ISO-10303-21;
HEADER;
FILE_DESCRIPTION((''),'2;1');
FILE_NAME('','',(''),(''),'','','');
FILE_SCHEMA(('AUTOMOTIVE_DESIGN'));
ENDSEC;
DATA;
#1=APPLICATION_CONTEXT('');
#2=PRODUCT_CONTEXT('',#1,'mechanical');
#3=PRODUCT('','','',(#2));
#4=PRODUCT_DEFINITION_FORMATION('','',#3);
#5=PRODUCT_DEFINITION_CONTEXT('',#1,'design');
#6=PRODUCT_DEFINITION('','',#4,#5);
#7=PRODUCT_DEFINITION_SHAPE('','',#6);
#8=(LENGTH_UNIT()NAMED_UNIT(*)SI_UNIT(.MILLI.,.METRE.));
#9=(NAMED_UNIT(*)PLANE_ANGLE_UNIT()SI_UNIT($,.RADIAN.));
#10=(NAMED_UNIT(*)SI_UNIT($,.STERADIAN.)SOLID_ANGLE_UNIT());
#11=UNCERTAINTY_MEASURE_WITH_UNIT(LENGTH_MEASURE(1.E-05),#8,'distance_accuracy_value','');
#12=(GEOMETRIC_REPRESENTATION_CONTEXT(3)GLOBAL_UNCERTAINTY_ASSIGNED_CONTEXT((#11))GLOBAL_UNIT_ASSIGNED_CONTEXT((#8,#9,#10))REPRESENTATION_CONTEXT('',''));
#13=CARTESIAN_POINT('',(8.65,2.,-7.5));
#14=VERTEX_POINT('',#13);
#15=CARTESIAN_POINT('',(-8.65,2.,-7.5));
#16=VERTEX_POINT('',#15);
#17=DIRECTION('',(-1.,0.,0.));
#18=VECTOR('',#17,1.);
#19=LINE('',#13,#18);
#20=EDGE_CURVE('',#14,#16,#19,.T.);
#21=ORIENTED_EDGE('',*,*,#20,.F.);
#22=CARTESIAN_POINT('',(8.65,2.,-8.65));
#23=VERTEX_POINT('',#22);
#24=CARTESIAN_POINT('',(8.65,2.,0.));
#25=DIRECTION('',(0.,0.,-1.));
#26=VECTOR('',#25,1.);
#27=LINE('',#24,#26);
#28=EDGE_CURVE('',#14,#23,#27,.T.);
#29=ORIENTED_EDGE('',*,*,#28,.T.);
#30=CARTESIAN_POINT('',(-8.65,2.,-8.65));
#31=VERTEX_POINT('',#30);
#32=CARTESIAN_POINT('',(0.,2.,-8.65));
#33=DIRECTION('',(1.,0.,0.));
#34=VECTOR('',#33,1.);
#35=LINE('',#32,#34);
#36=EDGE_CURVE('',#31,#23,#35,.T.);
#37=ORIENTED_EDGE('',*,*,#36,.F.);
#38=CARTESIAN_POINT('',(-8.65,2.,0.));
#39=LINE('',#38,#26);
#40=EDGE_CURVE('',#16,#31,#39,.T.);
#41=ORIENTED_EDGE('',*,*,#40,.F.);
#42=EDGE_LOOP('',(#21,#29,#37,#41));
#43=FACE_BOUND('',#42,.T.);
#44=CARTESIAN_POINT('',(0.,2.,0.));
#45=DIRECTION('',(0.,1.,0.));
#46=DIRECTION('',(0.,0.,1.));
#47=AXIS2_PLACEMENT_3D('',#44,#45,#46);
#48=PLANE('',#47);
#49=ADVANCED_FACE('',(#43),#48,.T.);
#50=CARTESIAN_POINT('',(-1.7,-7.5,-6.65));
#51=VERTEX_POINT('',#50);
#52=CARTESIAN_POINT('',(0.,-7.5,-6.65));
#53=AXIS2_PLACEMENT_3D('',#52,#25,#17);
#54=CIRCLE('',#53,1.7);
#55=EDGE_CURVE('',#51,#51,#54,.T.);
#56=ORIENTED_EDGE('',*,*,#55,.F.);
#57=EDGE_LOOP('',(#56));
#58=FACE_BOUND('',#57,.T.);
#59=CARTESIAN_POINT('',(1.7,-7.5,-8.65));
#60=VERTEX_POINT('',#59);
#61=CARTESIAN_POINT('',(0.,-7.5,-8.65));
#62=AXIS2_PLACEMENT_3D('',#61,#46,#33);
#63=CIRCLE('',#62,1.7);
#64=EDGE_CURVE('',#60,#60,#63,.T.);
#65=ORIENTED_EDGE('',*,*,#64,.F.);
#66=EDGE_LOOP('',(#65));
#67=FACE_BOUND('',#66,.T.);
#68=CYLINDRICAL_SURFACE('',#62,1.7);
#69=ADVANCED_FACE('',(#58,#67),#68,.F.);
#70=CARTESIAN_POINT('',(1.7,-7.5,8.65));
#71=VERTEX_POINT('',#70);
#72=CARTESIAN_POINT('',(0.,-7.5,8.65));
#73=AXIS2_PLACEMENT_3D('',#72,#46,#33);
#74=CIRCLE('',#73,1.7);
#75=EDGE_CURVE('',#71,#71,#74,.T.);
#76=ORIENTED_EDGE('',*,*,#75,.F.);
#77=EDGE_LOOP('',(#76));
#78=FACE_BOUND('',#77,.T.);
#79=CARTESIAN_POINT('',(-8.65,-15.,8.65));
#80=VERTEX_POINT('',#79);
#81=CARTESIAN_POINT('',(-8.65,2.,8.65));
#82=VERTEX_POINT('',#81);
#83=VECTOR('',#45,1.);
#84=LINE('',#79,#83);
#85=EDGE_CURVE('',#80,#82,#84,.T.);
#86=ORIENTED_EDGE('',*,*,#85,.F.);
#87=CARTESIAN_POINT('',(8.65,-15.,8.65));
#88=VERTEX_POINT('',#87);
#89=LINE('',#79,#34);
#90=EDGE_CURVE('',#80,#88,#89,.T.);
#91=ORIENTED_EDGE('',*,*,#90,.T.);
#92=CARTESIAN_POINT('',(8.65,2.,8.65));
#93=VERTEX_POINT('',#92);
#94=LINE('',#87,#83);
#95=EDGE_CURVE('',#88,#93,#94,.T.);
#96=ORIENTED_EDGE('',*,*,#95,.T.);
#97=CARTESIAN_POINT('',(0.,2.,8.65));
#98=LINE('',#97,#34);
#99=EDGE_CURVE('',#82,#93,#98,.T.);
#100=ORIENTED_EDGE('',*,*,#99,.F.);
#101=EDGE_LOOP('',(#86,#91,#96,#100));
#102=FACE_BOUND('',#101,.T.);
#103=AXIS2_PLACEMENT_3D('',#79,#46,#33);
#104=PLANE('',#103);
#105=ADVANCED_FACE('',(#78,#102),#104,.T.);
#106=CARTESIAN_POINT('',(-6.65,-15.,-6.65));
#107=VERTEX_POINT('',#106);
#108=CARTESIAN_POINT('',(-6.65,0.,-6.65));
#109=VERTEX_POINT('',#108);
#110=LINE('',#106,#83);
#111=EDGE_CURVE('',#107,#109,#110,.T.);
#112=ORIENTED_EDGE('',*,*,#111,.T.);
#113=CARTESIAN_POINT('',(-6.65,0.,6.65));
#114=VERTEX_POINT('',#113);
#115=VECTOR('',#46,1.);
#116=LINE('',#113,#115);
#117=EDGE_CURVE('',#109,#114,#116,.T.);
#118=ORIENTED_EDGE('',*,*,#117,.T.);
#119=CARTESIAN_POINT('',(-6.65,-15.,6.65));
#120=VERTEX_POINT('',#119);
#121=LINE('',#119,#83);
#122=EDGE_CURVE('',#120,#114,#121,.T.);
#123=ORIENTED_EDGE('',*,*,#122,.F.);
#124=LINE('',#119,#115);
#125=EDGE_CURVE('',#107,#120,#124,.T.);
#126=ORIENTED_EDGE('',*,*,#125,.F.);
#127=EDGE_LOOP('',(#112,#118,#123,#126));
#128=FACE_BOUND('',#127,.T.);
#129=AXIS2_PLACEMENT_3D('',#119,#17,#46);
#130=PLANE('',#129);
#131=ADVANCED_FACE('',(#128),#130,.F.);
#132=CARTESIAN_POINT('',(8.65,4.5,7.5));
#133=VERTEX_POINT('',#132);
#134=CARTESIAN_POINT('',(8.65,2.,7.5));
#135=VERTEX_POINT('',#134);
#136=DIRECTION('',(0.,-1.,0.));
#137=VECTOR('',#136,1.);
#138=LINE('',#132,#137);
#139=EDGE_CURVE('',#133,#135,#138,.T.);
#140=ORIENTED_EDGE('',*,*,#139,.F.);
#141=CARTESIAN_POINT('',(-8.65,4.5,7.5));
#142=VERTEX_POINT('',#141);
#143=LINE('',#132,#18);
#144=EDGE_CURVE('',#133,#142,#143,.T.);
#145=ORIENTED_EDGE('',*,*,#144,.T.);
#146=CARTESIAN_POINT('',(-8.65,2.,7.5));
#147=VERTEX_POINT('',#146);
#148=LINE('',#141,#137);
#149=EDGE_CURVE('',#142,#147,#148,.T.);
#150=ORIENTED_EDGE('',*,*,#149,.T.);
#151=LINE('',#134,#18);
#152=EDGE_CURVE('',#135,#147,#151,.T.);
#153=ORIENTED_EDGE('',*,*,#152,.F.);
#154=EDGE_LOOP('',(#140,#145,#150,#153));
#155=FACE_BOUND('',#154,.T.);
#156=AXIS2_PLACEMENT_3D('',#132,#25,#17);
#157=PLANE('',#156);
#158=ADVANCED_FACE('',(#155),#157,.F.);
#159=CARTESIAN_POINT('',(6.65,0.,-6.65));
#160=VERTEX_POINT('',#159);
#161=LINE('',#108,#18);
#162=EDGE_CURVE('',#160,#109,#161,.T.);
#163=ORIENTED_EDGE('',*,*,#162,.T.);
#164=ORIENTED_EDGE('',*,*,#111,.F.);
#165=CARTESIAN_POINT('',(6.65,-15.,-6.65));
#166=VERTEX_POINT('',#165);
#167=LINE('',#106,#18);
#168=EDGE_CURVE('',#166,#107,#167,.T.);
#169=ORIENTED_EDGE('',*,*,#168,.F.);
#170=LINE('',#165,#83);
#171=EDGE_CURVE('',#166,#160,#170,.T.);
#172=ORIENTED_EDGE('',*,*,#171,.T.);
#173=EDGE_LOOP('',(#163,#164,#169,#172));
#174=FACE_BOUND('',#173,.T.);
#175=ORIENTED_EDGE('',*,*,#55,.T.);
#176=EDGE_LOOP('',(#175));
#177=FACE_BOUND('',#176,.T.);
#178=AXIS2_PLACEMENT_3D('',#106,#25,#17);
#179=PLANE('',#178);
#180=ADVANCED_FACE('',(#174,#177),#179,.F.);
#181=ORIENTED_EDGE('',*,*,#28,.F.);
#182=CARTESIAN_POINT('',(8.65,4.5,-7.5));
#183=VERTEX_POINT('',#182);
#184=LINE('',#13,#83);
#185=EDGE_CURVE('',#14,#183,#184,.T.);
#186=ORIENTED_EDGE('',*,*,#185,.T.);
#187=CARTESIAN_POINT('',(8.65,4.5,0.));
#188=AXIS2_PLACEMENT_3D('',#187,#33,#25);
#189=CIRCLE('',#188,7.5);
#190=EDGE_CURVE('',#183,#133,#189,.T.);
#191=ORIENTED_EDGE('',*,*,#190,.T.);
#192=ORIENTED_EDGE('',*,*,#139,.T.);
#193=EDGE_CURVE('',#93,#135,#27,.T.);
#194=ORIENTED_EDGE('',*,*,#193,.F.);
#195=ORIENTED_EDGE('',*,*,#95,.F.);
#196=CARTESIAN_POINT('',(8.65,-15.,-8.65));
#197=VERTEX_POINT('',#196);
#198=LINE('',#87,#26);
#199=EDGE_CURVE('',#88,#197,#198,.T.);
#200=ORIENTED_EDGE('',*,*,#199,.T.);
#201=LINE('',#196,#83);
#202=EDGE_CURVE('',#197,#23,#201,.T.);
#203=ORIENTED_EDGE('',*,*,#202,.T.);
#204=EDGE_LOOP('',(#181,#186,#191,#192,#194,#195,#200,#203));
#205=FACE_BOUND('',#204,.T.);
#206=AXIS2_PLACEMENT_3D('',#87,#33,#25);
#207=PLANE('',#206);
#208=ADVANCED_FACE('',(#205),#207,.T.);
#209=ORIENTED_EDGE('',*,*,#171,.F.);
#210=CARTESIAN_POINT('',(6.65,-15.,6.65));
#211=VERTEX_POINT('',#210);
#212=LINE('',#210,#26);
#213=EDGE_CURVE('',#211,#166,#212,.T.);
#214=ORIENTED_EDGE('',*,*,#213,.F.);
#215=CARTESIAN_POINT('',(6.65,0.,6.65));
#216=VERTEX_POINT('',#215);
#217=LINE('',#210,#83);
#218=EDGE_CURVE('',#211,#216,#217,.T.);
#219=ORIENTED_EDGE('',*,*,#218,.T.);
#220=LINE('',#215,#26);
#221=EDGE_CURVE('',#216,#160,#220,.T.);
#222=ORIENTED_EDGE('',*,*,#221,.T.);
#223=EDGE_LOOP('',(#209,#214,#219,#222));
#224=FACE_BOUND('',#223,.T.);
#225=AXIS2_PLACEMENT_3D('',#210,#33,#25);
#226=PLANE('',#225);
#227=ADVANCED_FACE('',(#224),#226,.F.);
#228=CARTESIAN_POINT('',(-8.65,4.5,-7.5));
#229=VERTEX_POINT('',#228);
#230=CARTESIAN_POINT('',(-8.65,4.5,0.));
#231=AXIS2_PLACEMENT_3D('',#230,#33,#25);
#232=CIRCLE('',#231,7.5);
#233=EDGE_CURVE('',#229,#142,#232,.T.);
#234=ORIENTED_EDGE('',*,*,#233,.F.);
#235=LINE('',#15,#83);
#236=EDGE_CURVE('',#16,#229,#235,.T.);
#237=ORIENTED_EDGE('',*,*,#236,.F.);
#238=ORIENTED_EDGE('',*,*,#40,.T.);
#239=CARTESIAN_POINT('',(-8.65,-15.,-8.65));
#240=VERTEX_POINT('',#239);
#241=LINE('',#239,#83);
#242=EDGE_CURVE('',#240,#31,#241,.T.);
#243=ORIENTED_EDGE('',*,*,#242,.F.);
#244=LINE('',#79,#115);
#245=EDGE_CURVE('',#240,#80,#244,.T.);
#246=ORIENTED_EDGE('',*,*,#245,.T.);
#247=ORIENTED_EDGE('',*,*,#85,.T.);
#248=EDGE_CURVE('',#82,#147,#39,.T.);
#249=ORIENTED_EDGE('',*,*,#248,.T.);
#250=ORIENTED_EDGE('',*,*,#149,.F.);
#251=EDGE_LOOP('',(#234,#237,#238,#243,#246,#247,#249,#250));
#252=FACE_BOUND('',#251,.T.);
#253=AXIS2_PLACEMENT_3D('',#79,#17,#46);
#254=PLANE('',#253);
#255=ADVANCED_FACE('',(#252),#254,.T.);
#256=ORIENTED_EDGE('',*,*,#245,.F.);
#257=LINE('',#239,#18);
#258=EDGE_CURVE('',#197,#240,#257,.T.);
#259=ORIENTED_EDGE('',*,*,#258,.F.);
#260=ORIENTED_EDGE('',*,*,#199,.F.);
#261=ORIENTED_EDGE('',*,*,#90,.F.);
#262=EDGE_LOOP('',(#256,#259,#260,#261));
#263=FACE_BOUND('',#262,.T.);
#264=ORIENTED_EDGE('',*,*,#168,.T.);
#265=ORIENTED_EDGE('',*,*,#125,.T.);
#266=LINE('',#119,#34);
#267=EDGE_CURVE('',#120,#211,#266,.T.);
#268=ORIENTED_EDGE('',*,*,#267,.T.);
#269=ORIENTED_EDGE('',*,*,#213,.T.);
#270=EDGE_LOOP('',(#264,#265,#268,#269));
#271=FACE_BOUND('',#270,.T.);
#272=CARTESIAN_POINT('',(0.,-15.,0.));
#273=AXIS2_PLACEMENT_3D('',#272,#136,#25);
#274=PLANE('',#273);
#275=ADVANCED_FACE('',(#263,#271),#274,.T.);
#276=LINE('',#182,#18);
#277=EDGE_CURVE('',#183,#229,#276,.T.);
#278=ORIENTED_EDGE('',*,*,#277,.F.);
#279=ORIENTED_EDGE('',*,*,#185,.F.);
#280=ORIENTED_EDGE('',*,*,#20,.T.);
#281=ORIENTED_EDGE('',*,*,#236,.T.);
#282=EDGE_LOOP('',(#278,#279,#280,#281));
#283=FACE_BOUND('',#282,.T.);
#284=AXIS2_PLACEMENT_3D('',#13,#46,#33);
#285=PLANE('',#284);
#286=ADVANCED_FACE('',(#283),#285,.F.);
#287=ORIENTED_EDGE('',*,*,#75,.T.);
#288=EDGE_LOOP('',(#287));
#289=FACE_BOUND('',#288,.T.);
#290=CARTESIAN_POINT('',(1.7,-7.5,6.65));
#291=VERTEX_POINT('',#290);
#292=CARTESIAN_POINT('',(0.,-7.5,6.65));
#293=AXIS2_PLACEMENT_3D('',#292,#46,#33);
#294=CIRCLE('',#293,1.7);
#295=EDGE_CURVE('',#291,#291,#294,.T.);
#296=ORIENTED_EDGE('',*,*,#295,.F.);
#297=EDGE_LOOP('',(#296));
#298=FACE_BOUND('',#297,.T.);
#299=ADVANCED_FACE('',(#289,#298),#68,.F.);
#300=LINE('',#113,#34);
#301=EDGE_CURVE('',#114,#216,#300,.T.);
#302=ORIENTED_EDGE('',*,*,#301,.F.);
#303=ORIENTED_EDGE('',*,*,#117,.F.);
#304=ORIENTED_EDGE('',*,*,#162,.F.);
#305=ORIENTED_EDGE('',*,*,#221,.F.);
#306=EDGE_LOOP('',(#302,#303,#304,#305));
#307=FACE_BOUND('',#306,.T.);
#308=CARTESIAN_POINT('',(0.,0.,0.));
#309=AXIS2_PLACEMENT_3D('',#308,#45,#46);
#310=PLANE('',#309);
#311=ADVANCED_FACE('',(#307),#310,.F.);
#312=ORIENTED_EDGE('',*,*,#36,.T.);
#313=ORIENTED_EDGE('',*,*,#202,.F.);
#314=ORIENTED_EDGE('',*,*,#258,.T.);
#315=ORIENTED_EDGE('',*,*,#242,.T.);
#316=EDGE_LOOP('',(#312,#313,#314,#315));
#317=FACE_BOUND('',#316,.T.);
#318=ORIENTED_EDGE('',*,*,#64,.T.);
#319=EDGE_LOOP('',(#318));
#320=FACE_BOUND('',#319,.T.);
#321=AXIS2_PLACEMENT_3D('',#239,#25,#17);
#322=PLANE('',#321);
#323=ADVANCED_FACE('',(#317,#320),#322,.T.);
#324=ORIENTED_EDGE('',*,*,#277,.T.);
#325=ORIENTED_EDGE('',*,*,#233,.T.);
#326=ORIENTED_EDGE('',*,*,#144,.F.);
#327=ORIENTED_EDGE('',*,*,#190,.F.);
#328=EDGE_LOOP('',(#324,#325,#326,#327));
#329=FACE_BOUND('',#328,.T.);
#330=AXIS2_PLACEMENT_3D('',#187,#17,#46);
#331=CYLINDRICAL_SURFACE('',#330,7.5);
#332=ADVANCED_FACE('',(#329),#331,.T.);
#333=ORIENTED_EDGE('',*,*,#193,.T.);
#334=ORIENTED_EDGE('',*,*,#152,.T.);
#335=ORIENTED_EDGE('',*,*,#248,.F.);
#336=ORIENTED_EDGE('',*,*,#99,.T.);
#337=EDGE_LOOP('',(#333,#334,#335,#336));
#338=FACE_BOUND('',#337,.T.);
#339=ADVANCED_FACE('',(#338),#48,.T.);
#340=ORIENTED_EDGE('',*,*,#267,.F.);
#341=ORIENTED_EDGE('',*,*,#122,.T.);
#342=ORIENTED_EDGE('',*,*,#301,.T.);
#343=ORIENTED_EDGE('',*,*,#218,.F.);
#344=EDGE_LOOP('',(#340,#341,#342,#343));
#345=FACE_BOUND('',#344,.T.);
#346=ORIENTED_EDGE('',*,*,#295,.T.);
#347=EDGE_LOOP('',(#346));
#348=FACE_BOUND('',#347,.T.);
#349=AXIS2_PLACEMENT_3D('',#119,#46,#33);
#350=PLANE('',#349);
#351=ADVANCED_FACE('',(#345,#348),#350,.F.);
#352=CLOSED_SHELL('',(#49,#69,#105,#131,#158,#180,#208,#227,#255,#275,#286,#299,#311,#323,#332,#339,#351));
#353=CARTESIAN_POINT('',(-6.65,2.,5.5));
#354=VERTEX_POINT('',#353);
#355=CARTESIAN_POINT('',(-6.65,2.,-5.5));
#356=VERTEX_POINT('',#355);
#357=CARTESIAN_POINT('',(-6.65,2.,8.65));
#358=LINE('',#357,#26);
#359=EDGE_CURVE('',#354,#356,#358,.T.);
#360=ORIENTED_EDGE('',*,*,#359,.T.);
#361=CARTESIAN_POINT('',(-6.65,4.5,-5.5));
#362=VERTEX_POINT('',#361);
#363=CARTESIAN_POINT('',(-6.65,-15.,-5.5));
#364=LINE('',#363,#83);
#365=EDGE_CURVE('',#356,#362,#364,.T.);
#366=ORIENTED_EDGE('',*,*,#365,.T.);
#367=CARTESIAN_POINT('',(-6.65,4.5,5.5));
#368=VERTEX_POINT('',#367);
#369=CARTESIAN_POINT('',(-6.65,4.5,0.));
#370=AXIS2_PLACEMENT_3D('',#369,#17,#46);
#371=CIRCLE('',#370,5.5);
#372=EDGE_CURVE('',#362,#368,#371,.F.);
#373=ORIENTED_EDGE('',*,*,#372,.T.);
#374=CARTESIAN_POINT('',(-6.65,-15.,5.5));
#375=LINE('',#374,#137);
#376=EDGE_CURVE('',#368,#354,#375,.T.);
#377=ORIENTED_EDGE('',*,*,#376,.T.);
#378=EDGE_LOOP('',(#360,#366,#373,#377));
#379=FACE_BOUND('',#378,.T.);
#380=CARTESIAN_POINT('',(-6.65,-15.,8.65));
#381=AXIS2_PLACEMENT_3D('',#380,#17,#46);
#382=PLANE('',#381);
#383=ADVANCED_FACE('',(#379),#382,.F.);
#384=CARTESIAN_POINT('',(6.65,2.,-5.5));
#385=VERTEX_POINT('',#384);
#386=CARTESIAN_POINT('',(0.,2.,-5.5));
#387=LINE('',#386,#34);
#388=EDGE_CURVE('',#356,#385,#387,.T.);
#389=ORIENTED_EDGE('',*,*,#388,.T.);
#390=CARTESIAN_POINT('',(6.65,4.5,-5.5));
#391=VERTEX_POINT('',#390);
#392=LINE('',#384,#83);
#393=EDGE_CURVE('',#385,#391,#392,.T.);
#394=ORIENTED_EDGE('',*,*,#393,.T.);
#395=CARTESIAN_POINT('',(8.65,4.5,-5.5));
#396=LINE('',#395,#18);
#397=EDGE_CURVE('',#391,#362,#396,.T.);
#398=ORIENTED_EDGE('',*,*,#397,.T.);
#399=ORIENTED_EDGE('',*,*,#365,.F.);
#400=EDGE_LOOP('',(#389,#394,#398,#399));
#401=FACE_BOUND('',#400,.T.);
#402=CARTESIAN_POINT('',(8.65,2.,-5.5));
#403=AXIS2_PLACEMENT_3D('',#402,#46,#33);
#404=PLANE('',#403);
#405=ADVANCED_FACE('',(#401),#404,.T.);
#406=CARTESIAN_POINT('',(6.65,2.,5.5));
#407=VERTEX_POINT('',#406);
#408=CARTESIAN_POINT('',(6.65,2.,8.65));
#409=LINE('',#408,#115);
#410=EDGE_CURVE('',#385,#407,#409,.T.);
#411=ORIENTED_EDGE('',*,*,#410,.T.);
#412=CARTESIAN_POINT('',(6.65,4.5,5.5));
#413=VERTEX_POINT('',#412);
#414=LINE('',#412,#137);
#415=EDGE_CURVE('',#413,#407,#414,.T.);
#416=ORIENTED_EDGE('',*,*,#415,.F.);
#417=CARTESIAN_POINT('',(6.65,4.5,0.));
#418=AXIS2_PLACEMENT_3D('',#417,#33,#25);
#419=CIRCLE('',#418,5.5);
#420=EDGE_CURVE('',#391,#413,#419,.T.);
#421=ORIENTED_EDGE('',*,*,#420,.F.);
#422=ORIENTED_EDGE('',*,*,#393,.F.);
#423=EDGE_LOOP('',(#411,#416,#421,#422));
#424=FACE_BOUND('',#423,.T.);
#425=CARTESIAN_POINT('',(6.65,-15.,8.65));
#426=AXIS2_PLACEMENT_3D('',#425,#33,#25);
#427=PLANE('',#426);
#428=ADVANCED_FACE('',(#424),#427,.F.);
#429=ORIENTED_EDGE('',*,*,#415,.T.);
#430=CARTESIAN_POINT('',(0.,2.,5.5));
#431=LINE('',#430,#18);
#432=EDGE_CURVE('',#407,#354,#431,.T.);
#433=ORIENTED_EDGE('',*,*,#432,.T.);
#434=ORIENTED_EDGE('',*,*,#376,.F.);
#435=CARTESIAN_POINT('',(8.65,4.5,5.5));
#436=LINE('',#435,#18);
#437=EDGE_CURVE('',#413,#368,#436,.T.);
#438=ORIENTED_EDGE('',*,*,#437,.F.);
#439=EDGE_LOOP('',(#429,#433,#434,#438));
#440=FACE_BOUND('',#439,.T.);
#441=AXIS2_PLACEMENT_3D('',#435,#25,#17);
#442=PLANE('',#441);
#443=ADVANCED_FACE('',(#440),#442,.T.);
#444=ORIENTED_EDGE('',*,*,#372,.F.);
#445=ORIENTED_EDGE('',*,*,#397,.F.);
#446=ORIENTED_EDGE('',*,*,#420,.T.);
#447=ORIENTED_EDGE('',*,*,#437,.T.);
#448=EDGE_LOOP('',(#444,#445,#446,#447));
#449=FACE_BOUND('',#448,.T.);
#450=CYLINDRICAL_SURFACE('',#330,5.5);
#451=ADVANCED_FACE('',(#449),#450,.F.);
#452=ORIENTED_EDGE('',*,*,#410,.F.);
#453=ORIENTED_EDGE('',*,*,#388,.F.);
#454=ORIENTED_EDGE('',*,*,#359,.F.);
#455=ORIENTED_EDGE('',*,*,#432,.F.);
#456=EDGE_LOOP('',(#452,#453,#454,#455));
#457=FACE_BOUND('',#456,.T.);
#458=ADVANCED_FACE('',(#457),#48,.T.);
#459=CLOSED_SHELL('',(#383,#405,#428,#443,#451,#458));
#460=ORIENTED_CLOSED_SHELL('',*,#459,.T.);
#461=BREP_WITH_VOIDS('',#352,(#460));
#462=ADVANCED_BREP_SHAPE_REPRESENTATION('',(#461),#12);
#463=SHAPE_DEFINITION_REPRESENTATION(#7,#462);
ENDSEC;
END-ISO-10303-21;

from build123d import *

# Parameters (mm, degrees)
CROQUIS3_W                   = 17.3
CROQUIS3_H                   = 17.3
CROQUIS3_W_2                 = 13.3
CROQUIS3_H_2                 = 13.3
SALIENTE_EXTRUIR1_DEPTH      = 15
CROQUIS3_2_W                 = 17.3
CROQUIS3_2_H                 = 17.3
CROQUIS3_2_W_2               = 13.3
CROQUIS3_2_H_2               = 13.3
SALIENTE_EXTRUIR2_DEPTH      = 2
CORTAR_EXTRUIR1_DEPTH        = 20.3557485
CORTAR_EXTRUIR1_DEPTH_BACK   = 20.3557485
CROQUIS5_R                   = 1.7
SALIENTE_EXTRUIR4_DEPTH      = 8.65
SALIENTE_EXTRUIR4_DEPTH_BACK = 8.65
VACIADO1_START               = -6.65
VACIADO1_DEPTH               = 13.3


# Read off the part's stored shape, not the designer's step: Vaciado1
with BuildPart() as part:
    # Croquis3 → Saliente-Extruir1 (new body)
    with BuildSketch(Plane(origin=(0, 0, 0), x_dir=(1, 0, 0), z_dir=(0, 1, 0))):
        Rectangle(CROQUIS3_W, CROQUIS3_H)
        Rectangle(CROQUIS3_W_2, CROQUIS3_H_2, mode=Mode.SUBTRACT)
    extrude(amount=-SALIENTE_EXTRUIR1_DEPTH)

    # Croquis3<2> → Saliente-Extruir2 (add)
    # profile 1 of 2: a face of its own
    with BuildSketch(Plane(origin=(0, 0, 0), x_dir=(1, 0, 0), z_dir=(0, 1, 0))):
        Rectangle(CROQUIS3_2_W, CROQUIS3_2_H)
        Rectangle(CROQUIS3_2_W_2, CROQUIS3_2_H_2, mode=Mode.SUBTRACT)
    # profile 2 of 2: a face of its own
    with BuildSketch(Plane(origin=(0, 0, 0), x_dir=(1, 0, 0), z_dir=(0, 1, 0))):
        Rectangle(CROQUIS3_2_W_2, CROQUIS3_2_H_2)
    extrude(amount=SALIENTE_EXTRUIR2_DEPTH)

    # Croquis5 → Cortar-Extruir1 (cut, two sides: drawn at the far end of the back side and taken through both)
    with BuildSketch(Plane.XY.offset(-CORTAR_EXTRUIR1_DEPTH_BACK)):
        with Locations((0, -7.5)):
            Circle(CROQUIS5_R)
    extrude(amount=CORTAR_EXTRUIR1_DEPTH + CORTAR_EXTRUIR1_DEPTH_BACK, mode=Mode.SUBTRACT)

    # Croquis7 → Saliente-Extruir4 (add, two sides: drawn at the far end of the back side and taken through both)
    with BuildSketch(Plane(origin=(0, 0, 0), x_dir=(0, 0, -1), z_dir=(1, 0, 0)).offset(-SALIENTE_EXTRUIR4_DEPTH_BACK)):
        with BuildLine():
            Line((-7.5, 4.5), (-7.5, 2))
            Line((-7.5, 2), (7.5, 2))
            Line((7.5, 2), (7.5, 4.5))
            ThreePointArc((7.5, 4.5), (0, 12), (-7.5, 4.5))
        make_face()
    extrude(amount=SALIENTE_EXTRUIR4_DEPTH + SALIENTE_EXTRUIR4_DEPTH_BACK)

    # Vaciado1 outline → Vaciado1 (cut)
    with BuildSketch(Plane.YZ.offset(VACIADO1_START)):
        with BuildLine():
            Line((2, 5.5), (2, -5.5))
            Line((2, -5.5), (4.5, -5.5))
            ThreePointArc((4.5, -5.5), (10, 0), (4.5, 5.5))
            Line((4.5, 5.5), (2, 5.5))
        make_face()
    extrude(amount=VACIADO1_DEPTH, mode=Mode.SUBTRACT)


solid = part.part
